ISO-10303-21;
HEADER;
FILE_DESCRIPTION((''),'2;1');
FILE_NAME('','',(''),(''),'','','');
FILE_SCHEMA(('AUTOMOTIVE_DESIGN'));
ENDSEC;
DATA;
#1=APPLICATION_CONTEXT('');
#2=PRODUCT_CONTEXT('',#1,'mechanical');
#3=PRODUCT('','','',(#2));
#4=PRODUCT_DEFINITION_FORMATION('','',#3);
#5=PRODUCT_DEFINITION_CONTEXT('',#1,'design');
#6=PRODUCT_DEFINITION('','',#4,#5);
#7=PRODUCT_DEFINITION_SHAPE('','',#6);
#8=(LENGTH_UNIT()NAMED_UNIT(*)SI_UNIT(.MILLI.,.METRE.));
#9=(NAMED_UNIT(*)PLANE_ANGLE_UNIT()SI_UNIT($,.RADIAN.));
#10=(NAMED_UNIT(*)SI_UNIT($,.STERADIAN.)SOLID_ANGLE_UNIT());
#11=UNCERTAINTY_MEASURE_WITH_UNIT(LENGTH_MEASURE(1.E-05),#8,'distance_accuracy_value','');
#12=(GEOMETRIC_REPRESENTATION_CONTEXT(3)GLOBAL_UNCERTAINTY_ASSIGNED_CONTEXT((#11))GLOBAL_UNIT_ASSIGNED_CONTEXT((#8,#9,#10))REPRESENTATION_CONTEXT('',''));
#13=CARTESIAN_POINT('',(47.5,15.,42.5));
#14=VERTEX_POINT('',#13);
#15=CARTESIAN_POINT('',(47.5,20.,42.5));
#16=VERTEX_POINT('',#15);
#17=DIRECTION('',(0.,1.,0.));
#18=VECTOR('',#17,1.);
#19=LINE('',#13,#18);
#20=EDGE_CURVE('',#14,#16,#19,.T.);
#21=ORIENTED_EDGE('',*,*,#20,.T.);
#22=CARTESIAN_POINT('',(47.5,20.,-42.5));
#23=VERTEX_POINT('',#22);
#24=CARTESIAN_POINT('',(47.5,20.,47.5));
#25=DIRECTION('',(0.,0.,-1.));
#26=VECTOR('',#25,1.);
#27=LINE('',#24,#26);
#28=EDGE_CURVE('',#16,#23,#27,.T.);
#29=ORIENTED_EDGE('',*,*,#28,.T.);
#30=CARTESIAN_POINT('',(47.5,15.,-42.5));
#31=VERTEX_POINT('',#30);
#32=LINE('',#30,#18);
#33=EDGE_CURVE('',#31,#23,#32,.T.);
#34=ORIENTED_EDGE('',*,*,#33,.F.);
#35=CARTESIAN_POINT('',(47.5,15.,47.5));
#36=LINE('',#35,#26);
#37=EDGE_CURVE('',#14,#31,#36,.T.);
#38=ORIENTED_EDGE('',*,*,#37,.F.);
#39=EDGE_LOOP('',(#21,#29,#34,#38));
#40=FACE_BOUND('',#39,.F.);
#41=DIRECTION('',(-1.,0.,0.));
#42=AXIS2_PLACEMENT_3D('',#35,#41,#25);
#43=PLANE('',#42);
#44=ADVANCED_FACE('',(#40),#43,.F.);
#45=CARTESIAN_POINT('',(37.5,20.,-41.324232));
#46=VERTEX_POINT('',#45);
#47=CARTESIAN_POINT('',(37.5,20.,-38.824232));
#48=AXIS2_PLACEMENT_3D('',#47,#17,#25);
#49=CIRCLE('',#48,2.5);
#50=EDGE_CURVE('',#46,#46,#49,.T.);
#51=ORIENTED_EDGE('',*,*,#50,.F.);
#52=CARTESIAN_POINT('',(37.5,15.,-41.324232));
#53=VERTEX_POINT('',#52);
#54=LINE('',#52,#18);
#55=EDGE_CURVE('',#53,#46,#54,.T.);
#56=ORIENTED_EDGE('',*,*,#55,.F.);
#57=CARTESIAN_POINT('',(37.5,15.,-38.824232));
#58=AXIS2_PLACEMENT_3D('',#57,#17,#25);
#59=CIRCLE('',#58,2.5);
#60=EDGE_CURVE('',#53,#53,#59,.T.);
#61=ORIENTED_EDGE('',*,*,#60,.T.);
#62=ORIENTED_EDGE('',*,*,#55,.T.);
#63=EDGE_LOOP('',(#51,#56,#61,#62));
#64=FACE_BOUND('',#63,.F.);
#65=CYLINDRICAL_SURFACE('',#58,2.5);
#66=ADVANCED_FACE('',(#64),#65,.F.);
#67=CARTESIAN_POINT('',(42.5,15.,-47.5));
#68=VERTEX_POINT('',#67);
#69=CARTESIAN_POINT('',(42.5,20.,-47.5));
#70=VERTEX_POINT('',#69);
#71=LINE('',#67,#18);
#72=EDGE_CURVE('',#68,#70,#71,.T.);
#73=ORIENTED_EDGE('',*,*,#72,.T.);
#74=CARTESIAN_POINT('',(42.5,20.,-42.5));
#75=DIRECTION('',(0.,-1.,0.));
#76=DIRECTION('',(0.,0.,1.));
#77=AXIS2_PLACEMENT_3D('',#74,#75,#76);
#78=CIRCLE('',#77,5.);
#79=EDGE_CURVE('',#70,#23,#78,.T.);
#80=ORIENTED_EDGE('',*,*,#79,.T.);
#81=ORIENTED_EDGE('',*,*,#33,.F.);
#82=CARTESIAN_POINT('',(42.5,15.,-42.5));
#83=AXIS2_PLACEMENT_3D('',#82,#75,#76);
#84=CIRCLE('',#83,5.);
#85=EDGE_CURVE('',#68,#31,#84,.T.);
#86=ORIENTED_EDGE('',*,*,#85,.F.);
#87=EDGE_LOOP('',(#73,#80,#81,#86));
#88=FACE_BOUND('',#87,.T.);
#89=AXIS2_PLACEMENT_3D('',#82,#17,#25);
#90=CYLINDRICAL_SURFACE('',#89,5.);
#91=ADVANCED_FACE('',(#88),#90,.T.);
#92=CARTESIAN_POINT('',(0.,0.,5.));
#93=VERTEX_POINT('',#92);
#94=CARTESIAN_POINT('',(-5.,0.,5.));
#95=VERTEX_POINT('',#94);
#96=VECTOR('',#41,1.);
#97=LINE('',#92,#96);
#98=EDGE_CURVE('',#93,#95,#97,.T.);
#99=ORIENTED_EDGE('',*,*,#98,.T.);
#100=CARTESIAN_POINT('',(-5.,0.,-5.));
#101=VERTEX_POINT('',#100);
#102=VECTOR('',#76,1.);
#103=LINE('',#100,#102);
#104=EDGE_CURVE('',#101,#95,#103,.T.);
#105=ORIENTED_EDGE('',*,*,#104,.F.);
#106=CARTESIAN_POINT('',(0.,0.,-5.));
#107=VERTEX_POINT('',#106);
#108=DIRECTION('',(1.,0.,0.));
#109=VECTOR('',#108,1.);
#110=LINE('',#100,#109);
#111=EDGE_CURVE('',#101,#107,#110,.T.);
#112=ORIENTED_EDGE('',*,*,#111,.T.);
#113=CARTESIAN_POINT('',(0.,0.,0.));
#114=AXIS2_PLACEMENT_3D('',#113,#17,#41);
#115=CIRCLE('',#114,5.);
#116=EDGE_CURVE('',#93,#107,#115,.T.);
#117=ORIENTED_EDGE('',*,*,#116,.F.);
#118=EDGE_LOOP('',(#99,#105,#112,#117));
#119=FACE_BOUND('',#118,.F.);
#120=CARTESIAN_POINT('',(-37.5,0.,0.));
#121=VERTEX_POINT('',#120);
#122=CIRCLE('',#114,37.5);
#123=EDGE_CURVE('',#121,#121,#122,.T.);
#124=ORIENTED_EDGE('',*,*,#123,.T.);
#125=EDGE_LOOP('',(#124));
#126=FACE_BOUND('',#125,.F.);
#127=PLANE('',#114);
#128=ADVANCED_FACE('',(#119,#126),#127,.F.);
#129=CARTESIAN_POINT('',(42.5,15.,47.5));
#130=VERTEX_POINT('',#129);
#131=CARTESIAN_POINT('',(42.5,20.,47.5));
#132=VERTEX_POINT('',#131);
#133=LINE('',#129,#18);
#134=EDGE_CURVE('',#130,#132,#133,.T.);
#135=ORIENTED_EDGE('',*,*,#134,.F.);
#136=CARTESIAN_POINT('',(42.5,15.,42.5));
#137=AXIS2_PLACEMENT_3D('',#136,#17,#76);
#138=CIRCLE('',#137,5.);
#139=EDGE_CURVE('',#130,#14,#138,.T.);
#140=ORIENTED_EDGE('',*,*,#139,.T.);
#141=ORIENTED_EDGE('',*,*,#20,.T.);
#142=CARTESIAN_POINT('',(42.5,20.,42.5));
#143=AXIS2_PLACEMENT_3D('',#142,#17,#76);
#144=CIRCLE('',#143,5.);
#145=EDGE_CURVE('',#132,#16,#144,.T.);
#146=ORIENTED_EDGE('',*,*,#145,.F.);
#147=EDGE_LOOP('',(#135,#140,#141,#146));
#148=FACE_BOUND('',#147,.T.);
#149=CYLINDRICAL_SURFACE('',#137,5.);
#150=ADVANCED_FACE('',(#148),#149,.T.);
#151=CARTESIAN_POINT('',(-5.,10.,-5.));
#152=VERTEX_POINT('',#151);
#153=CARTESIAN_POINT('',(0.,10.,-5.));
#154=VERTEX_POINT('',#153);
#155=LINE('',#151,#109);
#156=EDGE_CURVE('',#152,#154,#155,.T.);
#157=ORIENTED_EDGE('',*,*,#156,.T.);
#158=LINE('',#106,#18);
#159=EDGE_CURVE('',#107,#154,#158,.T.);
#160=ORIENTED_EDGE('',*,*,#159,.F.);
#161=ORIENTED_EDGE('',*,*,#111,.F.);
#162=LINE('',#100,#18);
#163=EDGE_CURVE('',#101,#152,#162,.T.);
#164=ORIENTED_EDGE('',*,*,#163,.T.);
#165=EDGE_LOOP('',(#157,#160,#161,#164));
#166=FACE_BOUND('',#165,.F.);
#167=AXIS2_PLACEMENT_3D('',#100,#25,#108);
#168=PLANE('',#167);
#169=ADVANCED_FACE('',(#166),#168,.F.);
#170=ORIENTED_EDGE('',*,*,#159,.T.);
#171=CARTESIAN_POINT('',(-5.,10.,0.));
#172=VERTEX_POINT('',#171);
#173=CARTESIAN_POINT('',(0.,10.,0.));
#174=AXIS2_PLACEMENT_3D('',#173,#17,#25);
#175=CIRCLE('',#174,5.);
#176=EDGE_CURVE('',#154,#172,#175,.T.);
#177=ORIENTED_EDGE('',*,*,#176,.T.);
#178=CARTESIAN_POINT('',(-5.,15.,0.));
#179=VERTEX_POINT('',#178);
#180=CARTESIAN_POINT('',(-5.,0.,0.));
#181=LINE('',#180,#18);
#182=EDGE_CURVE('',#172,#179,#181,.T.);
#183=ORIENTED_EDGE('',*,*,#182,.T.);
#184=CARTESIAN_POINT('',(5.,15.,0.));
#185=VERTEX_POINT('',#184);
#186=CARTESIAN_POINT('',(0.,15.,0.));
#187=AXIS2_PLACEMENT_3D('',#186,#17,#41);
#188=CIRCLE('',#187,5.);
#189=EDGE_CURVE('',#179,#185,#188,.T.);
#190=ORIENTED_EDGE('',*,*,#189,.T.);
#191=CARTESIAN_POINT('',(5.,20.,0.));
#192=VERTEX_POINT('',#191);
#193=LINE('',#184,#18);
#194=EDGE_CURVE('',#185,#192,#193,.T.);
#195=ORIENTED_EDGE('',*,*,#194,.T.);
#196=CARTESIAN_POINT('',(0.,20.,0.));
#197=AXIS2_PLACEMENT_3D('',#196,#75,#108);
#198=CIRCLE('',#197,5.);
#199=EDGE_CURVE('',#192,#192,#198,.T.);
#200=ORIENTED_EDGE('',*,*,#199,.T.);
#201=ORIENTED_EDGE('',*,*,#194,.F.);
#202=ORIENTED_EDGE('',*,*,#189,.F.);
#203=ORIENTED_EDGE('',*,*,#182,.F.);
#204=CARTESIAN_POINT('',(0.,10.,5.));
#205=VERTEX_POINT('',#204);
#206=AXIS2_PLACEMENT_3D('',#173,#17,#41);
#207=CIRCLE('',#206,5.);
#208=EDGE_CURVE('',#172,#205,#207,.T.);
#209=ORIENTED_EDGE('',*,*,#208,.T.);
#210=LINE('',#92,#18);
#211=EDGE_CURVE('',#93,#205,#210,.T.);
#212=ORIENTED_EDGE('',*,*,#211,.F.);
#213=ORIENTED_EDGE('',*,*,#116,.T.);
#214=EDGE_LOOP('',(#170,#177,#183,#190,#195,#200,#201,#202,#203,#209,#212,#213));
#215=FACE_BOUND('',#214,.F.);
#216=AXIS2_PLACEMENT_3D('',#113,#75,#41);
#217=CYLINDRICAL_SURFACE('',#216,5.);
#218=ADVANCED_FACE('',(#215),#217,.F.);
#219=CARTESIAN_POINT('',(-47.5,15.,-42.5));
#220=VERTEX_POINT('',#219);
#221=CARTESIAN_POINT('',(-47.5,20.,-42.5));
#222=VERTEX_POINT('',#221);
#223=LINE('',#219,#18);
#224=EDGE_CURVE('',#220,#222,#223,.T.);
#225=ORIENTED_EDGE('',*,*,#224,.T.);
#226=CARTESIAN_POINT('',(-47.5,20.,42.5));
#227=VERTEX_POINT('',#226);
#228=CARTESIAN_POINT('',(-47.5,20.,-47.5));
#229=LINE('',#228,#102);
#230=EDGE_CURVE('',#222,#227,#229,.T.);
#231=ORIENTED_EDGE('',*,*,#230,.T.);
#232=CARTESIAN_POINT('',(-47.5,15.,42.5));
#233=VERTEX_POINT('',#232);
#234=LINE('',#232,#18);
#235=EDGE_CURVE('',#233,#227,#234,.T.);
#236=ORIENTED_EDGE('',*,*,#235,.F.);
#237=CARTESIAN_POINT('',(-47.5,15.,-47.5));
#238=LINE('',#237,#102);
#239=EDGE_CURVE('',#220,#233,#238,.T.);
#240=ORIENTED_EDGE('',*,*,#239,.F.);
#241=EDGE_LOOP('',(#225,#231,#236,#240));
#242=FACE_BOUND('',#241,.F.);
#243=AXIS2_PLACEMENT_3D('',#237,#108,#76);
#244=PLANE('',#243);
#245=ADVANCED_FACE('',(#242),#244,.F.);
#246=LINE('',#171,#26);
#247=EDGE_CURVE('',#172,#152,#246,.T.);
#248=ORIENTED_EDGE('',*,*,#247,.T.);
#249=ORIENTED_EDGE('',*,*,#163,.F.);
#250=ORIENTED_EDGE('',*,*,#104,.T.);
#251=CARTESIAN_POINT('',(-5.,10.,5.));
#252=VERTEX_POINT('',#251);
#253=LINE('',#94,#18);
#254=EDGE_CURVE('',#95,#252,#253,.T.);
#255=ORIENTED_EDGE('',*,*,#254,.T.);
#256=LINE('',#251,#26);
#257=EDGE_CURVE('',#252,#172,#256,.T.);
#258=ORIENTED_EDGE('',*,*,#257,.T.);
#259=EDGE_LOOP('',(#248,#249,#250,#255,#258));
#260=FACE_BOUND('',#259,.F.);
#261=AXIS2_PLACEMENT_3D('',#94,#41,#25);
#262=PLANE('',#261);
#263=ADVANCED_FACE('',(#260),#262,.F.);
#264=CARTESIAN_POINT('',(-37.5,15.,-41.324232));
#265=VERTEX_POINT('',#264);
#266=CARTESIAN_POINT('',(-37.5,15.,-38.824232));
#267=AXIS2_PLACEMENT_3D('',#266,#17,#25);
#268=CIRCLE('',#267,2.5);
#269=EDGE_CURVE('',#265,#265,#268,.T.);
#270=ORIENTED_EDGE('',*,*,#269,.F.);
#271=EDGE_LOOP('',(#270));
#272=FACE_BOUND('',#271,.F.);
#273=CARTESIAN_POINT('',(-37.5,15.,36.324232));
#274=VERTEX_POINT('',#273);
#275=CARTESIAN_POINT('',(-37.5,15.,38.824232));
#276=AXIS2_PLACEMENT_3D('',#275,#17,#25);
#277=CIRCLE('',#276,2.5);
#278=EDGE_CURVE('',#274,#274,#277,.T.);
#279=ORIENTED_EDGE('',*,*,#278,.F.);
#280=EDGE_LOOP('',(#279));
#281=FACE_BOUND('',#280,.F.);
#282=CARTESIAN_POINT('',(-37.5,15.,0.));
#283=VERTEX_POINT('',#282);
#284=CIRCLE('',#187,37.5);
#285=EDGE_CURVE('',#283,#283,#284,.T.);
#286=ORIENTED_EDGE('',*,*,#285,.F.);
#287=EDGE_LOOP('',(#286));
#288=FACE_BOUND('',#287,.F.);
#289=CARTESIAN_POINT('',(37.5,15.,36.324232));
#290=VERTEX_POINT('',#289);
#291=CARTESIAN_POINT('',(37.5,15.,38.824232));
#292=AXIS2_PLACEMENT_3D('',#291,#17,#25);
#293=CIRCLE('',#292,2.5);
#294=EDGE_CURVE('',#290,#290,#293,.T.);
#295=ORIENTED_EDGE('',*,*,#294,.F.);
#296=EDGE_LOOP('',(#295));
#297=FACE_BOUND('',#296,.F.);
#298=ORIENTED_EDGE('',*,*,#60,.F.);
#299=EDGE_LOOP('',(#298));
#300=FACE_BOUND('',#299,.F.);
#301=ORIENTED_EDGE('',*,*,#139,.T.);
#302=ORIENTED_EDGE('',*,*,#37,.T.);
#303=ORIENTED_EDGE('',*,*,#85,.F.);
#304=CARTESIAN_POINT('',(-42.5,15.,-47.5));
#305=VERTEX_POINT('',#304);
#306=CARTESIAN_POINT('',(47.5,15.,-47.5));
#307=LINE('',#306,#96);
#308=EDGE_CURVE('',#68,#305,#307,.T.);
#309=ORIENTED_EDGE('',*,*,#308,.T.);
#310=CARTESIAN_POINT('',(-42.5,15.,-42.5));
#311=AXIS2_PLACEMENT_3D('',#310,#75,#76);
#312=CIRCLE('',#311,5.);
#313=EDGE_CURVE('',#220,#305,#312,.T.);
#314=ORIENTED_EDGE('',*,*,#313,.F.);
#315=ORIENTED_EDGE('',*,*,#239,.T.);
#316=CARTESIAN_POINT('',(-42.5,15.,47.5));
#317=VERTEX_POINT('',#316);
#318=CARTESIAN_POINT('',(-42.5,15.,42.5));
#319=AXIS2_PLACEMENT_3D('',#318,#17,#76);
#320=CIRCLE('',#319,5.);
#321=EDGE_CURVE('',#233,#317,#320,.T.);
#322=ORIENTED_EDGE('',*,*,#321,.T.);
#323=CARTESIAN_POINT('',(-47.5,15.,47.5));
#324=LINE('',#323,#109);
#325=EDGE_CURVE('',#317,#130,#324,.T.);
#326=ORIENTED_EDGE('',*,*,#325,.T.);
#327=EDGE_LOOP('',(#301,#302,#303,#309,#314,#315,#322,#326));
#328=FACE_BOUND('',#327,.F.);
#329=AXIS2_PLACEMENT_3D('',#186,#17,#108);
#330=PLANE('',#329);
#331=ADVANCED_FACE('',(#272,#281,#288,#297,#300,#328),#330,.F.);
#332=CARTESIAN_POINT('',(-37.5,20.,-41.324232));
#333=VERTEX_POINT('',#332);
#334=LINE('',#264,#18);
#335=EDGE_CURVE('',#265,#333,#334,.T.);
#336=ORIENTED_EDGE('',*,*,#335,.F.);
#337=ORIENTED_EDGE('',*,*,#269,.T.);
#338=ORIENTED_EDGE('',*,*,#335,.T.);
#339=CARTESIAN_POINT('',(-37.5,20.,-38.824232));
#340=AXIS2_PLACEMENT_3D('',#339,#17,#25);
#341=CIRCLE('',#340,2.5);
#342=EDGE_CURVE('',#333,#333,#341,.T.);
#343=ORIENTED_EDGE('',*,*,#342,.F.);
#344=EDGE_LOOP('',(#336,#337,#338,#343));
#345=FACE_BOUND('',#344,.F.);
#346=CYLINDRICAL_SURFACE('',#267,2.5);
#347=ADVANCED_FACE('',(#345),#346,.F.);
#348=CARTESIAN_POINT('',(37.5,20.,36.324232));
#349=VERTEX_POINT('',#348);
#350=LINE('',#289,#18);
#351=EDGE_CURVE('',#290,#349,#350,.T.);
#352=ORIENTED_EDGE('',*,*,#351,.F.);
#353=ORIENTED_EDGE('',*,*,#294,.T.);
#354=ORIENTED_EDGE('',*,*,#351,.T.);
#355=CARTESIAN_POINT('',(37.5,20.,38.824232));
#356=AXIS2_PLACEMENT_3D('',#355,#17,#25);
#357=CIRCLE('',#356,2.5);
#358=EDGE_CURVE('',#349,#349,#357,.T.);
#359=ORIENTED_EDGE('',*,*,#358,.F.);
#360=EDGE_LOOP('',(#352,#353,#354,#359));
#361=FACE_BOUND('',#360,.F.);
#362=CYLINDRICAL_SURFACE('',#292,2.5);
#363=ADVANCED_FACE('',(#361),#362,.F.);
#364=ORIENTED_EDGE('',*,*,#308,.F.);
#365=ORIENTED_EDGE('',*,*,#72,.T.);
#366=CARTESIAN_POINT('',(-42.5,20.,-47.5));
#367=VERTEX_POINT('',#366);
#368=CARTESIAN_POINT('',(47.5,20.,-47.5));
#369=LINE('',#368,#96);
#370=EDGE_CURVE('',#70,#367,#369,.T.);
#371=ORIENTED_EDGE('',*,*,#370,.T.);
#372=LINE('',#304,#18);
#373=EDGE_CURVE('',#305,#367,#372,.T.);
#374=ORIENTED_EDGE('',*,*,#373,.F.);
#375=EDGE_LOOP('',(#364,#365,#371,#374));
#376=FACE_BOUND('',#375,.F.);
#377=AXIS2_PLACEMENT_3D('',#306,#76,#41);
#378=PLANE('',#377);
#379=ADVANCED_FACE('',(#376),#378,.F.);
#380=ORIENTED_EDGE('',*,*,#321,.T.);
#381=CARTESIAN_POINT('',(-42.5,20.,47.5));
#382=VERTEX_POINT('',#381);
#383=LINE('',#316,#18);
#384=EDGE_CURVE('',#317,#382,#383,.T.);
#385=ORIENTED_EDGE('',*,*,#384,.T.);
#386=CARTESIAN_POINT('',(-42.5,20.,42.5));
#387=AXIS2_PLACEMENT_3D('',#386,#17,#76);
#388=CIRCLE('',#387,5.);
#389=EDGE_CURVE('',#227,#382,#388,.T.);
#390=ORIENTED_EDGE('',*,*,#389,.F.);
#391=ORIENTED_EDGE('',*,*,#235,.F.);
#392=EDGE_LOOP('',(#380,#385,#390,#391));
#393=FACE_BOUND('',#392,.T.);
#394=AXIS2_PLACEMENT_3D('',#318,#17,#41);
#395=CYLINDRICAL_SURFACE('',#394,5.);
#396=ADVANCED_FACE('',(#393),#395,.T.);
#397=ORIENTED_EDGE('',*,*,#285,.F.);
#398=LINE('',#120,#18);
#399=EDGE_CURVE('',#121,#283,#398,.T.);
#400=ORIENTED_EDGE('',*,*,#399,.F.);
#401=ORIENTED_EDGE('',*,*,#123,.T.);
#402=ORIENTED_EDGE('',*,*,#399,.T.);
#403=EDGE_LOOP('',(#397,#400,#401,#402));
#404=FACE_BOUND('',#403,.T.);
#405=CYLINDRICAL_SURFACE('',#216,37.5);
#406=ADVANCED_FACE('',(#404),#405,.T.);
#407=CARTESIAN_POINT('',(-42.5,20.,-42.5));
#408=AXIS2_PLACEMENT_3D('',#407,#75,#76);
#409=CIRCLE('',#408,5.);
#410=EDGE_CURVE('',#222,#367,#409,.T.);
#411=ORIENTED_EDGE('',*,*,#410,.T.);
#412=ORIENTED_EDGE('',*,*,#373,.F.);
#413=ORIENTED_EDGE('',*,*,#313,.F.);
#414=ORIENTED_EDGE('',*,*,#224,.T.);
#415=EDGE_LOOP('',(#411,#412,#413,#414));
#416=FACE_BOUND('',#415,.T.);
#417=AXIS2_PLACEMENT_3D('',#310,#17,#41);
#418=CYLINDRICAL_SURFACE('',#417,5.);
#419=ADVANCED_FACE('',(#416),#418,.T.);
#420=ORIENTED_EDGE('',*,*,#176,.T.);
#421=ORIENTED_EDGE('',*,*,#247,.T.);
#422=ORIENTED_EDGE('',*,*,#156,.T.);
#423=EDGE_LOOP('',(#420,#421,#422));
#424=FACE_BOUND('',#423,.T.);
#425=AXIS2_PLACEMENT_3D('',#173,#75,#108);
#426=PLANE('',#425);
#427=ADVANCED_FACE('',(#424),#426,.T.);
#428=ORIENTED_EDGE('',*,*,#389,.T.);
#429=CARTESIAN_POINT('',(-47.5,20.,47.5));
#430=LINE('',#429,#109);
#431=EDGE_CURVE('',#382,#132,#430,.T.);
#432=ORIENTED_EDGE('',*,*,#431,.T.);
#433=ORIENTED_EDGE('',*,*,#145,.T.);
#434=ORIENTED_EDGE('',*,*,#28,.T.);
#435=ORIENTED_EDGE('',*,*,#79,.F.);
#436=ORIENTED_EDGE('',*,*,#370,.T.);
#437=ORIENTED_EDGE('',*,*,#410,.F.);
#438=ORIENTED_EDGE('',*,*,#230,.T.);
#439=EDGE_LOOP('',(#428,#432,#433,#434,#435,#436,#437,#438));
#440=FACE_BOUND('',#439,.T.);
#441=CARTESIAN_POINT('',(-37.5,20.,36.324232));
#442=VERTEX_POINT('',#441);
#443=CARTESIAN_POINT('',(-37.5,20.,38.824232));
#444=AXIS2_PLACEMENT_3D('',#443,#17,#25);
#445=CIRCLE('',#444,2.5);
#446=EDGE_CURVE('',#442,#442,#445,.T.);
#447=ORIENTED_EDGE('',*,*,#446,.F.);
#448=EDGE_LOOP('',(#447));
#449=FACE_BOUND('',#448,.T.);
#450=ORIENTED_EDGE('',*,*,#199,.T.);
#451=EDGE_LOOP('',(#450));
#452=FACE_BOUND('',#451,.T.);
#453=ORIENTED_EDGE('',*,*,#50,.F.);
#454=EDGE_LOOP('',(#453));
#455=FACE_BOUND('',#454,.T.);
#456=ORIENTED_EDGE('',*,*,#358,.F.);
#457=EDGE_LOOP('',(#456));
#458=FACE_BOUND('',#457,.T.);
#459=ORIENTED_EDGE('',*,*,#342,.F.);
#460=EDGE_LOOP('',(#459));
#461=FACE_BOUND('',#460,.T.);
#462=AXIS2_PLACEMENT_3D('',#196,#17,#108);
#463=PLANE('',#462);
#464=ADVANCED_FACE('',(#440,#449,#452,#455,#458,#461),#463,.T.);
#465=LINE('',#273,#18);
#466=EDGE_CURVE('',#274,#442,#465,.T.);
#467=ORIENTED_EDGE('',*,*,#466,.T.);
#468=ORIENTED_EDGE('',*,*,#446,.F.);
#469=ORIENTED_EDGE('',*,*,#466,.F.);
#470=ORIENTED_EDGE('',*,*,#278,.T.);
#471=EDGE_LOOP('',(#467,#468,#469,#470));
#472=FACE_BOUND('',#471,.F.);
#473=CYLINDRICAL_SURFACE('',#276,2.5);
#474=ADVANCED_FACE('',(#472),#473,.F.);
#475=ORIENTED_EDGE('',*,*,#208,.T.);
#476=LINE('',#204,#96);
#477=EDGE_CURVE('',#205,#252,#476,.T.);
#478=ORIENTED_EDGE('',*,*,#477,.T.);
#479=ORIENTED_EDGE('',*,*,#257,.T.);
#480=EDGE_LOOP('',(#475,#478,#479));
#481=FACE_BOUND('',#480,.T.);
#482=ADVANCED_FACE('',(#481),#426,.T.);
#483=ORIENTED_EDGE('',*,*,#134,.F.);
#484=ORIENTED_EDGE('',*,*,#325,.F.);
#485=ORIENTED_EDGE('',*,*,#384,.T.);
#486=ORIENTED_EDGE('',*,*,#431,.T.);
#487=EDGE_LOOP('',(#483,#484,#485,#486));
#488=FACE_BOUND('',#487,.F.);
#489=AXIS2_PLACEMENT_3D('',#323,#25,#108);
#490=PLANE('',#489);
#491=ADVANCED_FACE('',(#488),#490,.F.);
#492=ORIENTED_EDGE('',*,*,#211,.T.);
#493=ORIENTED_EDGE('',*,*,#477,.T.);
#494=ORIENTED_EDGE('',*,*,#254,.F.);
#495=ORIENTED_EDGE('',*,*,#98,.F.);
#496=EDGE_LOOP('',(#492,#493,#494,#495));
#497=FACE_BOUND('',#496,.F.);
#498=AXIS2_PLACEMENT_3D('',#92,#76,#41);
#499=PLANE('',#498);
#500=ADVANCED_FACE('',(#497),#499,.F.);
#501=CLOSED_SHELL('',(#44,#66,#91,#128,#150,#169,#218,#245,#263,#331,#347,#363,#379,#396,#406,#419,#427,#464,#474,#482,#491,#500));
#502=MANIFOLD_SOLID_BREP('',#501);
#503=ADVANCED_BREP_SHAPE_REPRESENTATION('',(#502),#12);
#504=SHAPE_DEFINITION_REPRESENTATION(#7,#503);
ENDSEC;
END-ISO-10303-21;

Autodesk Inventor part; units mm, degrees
ref_plane "YZ Plane" through (0, 0, 0) normal (1, 0, 0) x (0, 1, 0)
ref_plane "XZ Plane" through (0, 0, 0) normal (0, 1, 0) x (-1, 0, 0)
ref_plane "XY Plane" through (0, 0, 0) normal (0, 0, 1) x (1, 0, 0)
sketch "Sketch1" plane through (0, 0, 0) normal (0, 1, 0) x (-1, 0, 0)
  circle A0 centre (0, 0) radius 37.5
  circle A1 centre (0, 0) radius 5
  dimension "d0" = 75
  dimension "d1" = 10
extrude "Extrusion1" add sketch "Sketch1" along normal blind 15
sketch "Sketch2" plane through (0, 15, 0) normal (0, 1, 0) x (1, 0, 0)
  line L0 (-47.5, -47.5) -> (47.5, -47.5)
  line L1 (47.5, -47.5) -> (47.5, 47.5)
  line L2 (47.5, 47.5) -> (-47.5, 47.5)
  line L3 (-47.5, 47.5) -> (-47.5, -47.5)
  line L4 (-47.5, -47.5) -> (47.5, 47.5) construction
  line L5 (47.5, -47.5) -> (-47.5, 47.5) construction
  circle A0 centre (0, 0) radius 37.5 projected
  circle A1 centre (0, 0) radius 5 projected
  line L6 (-10, -5) -> (0, -5)
  line L7 (0, -5) -> (0, 5)
  line L8 (0, 5) -> (-10, 5)
  line L9 (-10, 5) -> (-10, -5)
  line L10 (-10, -5) -> (0, 5) construction
  line L11 (0, -5) -> (-10, 5) construction
  point P0 (-5, 0)
  dimension "d4" = 95
  dimension "d5" = 95
extrude "Extrusion2" add sketch "Sketch2" along normal blind 5 contours L3 L2 L1 L0 | A0 | A1 L6 L9 L8
fillet "Fillet1" radius 5 4 edges at (47.5, 17.5, -47.5) (-47.5, 17.5, -47.5) (47.5, 17.5, 47.5) (-47.5, 17.5, 47.5)
sketch "Sketch4" plane through (0, 0, 0) normal (0, -1, 0) x (1, 0, 0)
  circle A0 centre (0, 0) radius 37.5 projected
  circle A1 centre (0, 0) radius 5 projected
  line L0 (0, 5) -> (-5, 5)
  line L1 (-5, 5) -> (-5, 0)
  line L2 (-5, -5) -> (0, -5)
  line L3 (-5, -5) -> (-5, 0)
sketch "Sketch4 outline for Extrusion3" plane through (0, 0, 0) normal (0, -1, 0) x (1, 0, 0)
  line L0 (-5, 0) -> (-5, -5)
  arc A0 (0, -5) -> (-5, 0) centre (0, 0) cw
  line L1 (-5, -5) -> (0, -5)
  line L2 (-5, 5) -> (-5, 0)
  line L3 (0, 5) -> (-5, 5)
  arc A1 (-5, 0) -> (0, 5) centre (0, 0) cw
extrude "Extrusion3" cut sketch "Sketch4 outline for Extrusion3" against normal blind 10
sketch "Sketch6" plane through (0, 15, 0) normal (0, -1, 0) x (1, 0, 0)
  line L0 (37.5, 38.824232) -> (-37.5, 38.824232)
  line L1 (-37.5, 38.824232) -> (-37.5, -38.824232)
  line L2 (-37.5, -38.824232) -> (37.5, -38.824232)
  line L3 (37.5, -38.824232) -> (37.5, 38.824232)
  line L4 (37.5, 38.824232) -> (-37.5, -38.824232) construction
  line L5 (-37.5, 38.824232) -> (37.5, -38.824232) construction
  point P0 (0, 0)
  dimension "d11" = 75
hole "Hole1" at (37.5, 15, -38.824232) at (-37.5, 15, -38.824232) at (-37.5, 15, 38.824232) at (37.5, 15, 38.824232) direction (0, 1, 0) diameter 5 end through all
properties part number "Saugknopf"
